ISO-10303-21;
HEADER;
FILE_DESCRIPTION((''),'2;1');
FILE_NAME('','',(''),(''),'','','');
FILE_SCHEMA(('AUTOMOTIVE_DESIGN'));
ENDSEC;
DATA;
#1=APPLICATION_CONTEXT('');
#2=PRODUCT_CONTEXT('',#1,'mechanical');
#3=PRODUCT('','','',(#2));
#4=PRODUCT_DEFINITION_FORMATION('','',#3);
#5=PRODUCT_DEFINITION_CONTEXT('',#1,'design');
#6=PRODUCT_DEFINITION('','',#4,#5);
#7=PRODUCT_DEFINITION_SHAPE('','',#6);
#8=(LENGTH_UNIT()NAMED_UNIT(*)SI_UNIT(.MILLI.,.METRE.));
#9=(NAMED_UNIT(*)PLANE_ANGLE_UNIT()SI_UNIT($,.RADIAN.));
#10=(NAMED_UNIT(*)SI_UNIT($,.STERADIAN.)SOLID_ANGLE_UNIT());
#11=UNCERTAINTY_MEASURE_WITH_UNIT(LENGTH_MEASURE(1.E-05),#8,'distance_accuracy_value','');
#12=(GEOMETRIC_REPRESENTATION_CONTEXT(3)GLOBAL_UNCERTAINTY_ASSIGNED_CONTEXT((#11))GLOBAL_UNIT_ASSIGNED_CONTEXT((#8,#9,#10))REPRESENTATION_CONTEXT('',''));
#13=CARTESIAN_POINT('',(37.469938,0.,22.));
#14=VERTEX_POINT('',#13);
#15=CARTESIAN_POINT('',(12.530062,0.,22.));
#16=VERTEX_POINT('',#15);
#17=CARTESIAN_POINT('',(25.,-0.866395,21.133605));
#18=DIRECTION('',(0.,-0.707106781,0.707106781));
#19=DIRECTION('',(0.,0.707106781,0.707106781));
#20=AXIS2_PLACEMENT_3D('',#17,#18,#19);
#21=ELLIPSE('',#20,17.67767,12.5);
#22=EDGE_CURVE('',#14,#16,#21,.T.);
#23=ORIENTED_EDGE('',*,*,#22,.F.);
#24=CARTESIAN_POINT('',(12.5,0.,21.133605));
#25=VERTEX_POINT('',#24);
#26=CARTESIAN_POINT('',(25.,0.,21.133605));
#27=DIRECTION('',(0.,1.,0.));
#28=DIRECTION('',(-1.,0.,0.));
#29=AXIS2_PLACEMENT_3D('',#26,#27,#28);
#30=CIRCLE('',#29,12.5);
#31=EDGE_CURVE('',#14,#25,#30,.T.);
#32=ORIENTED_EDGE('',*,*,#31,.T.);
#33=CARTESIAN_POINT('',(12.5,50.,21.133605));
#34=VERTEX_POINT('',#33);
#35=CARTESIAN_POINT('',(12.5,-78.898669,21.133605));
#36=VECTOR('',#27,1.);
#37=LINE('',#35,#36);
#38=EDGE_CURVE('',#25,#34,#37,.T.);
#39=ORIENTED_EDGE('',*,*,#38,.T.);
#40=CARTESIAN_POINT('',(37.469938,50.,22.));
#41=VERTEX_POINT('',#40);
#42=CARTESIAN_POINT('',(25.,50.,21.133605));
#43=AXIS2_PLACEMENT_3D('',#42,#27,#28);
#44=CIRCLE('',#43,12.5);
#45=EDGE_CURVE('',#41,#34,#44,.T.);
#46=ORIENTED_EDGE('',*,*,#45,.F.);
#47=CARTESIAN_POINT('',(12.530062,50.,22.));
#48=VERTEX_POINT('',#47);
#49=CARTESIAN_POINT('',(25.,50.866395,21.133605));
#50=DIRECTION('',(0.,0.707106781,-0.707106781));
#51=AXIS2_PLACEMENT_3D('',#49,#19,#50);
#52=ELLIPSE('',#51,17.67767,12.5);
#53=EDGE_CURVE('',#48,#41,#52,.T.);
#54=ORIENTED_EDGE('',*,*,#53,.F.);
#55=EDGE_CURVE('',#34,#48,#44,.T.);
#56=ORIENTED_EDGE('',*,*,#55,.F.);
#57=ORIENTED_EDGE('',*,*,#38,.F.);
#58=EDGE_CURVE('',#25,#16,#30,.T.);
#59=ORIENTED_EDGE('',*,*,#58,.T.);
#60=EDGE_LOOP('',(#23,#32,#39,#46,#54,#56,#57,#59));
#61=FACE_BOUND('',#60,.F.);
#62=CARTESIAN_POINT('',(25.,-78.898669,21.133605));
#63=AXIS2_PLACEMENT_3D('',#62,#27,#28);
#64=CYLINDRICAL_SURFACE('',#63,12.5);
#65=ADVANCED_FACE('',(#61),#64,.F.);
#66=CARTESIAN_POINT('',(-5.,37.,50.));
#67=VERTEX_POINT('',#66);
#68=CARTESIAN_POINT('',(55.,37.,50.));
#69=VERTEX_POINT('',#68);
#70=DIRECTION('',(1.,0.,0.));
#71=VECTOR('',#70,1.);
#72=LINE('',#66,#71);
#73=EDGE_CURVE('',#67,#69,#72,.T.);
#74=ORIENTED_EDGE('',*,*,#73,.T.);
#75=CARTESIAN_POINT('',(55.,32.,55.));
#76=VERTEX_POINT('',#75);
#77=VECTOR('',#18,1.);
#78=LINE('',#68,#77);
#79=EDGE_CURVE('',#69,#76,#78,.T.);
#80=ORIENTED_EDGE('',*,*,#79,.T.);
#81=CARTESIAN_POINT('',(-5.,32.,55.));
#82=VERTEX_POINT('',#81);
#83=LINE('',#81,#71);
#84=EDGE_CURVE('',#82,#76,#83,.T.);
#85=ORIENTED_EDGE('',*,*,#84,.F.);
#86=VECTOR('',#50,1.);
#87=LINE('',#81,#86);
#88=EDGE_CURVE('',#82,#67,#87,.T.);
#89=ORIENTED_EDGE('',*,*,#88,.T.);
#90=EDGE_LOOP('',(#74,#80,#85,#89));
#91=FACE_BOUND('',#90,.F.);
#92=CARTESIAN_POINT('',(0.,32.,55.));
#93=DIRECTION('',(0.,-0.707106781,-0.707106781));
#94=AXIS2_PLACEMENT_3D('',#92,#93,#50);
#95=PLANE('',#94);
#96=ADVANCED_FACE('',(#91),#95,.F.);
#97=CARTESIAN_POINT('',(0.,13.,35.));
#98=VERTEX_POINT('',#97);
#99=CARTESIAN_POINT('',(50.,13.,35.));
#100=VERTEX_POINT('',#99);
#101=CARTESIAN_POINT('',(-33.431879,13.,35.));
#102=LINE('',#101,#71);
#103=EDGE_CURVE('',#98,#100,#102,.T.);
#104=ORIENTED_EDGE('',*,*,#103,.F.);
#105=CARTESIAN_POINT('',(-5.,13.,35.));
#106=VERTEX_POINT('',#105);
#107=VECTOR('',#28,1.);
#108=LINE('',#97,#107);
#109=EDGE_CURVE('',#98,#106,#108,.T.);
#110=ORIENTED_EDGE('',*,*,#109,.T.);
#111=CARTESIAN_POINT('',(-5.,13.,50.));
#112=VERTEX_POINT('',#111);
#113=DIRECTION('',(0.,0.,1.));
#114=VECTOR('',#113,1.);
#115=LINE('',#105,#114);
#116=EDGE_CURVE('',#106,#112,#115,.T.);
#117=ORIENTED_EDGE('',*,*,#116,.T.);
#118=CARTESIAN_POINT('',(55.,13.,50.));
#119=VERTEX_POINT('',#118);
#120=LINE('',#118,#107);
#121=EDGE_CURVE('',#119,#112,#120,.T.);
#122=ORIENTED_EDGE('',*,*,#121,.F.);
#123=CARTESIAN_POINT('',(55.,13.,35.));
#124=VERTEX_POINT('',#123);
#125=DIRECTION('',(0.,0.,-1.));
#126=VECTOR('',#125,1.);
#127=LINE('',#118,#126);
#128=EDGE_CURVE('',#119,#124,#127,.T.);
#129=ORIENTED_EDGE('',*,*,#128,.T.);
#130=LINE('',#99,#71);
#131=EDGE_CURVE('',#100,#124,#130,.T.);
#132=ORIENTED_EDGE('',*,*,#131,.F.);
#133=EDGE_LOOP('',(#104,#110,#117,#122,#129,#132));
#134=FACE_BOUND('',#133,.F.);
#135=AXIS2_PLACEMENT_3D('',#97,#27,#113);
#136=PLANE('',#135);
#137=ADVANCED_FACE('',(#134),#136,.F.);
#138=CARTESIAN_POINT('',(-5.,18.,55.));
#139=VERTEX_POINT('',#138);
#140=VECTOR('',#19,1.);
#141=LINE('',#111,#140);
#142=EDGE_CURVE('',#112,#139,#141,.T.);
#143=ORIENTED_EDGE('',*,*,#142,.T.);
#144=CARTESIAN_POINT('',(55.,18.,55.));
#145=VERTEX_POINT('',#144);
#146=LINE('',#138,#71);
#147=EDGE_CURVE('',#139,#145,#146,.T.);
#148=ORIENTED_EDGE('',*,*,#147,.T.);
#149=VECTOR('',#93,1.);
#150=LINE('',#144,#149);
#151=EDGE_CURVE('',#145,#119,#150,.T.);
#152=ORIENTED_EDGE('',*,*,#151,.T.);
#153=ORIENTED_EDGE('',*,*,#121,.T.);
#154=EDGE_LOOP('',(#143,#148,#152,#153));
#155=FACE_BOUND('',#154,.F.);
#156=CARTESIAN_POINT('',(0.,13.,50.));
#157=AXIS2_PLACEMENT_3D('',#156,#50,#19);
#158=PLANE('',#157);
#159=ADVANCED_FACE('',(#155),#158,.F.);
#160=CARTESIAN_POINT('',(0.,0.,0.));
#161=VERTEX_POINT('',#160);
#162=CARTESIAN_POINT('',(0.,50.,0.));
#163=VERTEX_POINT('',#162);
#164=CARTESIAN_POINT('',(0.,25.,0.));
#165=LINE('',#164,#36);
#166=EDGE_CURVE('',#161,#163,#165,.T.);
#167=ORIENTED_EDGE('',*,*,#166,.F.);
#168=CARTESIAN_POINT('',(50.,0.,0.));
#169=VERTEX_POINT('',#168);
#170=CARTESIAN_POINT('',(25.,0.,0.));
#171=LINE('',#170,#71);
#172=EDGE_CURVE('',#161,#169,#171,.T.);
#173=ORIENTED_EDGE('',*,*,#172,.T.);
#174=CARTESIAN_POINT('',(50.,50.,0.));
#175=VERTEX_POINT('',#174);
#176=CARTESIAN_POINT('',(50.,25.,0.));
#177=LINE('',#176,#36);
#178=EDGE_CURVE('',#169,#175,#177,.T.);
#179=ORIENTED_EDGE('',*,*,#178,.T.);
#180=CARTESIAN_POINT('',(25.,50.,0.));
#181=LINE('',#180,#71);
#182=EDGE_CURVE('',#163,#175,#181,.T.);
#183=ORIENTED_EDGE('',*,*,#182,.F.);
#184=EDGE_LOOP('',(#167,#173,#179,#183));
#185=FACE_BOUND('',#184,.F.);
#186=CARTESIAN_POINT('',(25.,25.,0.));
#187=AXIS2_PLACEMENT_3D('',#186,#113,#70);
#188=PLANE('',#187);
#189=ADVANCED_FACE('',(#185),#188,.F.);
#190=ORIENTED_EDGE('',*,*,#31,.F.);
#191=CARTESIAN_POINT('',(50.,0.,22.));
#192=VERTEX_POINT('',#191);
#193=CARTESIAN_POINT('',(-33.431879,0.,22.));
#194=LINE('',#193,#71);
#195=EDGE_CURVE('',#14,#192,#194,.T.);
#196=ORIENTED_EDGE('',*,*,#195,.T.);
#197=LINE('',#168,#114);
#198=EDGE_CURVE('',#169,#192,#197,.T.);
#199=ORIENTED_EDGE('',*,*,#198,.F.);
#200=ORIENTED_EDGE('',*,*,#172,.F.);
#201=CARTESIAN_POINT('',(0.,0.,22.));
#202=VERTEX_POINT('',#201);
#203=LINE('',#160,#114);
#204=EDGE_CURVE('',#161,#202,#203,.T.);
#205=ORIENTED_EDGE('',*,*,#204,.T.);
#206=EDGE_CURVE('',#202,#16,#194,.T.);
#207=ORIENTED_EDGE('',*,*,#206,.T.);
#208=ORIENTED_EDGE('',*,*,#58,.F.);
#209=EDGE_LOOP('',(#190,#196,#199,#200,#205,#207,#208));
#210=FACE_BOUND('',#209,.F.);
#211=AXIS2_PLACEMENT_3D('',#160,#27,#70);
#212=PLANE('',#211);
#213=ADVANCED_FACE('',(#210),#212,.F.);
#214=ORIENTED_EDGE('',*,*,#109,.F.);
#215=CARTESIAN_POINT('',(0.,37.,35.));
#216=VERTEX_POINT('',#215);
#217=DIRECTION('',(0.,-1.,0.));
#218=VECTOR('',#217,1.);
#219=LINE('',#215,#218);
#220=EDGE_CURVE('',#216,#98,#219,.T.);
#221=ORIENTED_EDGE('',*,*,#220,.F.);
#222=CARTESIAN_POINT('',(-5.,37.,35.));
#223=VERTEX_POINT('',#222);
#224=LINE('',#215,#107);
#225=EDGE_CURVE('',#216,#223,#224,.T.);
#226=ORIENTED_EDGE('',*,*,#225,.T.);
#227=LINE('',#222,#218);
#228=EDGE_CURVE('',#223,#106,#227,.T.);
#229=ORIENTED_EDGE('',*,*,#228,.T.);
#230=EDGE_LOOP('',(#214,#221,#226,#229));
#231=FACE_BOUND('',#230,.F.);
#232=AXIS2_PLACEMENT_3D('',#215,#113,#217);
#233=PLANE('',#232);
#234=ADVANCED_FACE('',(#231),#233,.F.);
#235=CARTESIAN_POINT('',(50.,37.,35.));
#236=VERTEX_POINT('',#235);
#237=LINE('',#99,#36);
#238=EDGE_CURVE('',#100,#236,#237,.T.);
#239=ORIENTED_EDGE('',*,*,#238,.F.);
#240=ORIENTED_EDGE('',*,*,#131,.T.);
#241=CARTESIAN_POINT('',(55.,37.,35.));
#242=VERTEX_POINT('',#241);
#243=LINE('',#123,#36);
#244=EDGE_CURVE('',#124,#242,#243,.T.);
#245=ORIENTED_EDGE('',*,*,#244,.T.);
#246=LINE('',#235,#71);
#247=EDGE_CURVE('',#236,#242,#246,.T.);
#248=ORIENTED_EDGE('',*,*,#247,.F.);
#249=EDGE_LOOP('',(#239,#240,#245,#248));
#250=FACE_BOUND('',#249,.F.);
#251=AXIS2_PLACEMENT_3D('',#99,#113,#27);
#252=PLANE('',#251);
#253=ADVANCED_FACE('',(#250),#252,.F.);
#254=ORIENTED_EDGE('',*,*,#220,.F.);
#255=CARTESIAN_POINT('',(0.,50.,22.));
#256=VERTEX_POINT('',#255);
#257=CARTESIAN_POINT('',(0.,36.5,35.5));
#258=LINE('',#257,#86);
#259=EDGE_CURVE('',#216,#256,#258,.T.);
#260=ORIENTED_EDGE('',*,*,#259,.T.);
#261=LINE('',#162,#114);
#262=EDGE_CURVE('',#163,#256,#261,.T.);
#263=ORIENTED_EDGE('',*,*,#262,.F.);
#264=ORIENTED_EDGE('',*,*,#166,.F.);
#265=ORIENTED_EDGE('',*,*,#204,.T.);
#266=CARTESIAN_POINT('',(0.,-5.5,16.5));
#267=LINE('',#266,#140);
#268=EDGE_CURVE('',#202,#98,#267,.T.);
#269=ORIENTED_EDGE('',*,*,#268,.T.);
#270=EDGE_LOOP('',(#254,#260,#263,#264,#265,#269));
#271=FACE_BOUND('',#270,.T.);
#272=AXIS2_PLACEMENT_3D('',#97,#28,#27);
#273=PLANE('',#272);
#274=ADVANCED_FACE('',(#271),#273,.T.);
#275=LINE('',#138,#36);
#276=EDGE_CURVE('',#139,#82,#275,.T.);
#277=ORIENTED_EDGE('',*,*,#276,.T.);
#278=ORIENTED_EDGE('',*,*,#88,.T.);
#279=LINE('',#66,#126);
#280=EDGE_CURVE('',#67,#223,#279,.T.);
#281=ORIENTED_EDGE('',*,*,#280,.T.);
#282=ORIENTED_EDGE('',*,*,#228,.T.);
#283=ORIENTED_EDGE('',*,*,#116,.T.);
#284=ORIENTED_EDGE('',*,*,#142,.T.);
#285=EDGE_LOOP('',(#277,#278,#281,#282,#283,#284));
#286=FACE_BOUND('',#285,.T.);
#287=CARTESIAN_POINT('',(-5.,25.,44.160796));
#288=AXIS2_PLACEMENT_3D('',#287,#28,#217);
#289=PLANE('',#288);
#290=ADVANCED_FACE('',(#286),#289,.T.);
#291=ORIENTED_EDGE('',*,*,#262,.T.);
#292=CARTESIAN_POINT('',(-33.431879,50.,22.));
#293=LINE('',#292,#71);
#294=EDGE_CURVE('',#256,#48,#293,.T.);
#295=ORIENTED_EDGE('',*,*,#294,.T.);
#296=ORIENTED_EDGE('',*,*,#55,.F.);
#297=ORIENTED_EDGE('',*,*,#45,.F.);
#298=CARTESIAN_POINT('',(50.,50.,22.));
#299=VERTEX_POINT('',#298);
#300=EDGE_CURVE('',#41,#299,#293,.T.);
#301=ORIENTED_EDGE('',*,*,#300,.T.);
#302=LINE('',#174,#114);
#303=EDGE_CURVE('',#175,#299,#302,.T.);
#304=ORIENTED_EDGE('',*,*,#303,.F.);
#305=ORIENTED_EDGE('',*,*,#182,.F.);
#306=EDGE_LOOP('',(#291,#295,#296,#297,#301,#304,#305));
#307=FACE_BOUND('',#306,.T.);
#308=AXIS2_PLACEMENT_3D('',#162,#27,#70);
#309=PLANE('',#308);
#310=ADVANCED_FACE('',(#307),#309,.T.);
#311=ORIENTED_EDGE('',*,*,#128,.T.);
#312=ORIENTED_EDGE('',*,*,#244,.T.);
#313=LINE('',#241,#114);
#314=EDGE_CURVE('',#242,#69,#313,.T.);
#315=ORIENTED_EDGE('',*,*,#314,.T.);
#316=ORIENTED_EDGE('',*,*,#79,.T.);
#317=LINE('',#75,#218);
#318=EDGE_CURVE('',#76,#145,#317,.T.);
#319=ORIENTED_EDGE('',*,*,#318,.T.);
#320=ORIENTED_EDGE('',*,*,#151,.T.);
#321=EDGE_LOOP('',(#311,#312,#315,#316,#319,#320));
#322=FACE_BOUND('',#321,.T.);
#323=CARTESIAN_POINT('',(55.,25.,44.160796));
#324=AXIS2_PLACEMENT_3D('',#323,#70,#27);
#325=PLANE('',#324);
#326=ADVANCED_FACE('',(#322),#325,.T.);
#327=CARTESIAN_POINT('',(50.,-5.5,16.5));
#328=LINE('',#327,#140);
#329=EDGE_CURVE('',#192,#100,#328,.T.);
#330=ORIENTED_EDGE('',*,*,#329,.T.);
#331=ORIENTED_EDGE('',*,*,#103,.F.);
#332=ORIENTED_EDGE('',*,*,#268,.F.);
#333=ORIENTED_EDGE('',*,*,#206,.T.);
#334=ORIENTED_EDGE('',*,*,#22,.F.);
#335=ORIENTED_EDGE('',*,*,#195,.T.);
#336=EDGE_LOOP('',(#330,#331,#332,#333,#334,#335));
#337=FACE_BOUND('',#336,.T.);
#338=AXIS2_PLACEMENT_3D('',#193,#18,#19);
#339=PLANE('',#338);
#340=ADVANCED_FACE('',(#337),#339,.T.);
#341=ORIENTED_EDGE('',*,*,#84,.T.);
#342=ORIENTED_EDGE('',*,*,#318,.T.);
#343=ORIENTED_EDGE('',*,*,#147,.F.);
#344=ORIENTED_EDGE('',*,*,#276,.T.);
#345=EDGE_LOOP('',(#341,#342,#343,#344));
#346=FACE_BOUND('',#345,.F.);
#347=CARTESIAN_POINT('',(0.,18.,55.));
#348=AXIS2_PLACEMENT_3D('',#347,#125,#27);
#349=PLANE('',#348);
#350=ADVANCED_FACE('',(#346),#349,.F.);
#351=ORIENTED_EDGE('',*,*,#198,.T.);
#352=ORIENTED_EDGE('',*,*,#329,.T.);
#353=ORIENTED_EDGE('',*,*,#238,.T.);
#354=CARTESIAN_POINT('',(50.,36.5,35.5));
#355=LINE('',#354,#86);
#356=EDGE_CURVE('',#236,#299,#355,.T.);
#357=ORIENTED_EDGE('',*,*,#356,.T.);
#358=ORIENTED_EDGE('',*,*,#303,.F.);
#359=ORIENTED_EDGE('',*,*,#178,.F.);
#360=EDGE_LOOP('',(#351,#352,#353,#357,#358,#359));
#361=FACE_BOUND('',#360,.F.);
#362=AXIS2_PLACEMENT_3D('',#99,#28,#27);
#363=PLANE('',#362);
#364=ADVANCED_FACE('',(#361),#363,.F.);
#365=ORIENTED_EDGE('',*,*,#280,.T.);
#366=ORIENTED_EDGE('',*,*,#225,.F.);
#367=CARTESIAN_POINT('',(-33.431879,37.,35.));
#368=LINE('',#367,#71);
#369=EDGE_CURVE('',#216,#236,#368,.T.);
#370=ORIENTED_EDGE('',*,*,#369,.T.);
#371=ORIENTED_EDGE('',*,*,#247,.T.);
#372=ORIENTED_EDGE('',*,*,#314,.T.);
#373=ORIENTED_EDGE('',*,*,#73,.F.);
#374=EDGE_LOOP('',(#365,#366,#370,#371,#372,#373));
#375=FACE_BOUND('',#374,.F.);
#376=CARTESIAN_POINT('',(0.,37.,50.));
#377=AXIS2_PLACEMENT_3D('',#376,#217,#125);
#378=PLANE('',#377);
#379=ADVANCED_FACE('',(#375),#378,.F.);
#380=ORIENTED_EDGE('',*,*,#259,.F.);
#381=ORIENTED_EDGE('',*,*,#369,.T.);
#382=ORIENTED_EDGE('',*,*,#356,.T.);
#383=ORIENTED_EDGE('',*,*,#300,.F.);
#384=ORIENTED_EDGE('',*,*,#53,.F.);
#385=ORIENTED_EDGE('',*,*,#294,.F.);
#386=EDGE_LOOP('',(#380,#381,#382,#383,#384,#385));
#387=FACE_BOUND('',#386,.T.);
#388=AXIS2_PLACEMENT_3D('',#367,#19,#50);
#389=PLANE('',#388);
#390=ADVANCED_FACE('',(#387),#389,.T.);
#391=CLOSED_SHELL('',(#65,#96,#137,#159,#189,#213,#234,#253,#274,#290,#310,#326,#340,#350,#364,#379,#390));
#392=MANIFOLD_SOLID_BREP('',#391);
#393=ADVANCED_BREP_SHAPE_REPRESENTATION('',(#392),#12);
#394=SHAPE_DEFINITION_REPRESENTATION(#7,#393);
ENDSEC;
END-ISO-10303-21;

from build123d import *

# Parameters (mm, degrees)
F0_W        = 50
F0_H        = 50
F1_DEPTH    = 35
F3_D        = 25
F4_T1_DEPTH = 116.8637576871
F5_T1_DEPTH = 116.8637576871
F6_DEPTH    = 20
F7_T1_DEPTH = 75.7168298797
F10_DEPTH   = 5
F12_DEPTH   = 5


# Not quite as in the source:
# - a fillet or chamfer that OpenCascade refuses, or shapes differently, is made with other operations: its cross-section is extruded or revolved along the edge and cut away or added
# - two fillets or chamfers of one size are made in one step


with BuildPart() as f1:
    # F0 (on Top) → F1 (new body)
    with BuildSketch(Plane.XY):
        with Locations((25, 25)):
            Rectangle(F0_W, F0_H)
    extrude(amount=F1_DEPTH)

    # F3 (through all)
    with Locations(Plane.XZ):
        with Locations((25, 21.1336053908)):
            Hole(F3_D / 2)

    # F4: chamfer of 13 on 1 edges, made by hand

    # F4_s2 → F4_t1 (cut)
    with BuildSketch(Plane.YZ.offset(-33.4318788436)):
        Polygon((0, 22), (13, 35), (0, 35), align=None)
    extrude(amount=F4_T1_DEPTH, mode=Mode.SUBTRACT)

    # F5: chamfer of 13 on 1 edges, made by hand

    # F5_s2 → F5_t1 (cut)
    with BuildSketch(Plane.YZ.offset(-33.4318788436)):
        Polygon((37, 35), (50, 22), (50, 35), align=None)
    extrude(amount=F5_T1_DEPTH, mode=Mode.SUBTRACT)

    # F6 (add): a face of the model
    f6_faces = [f1.faces().sort_by_distance(p)[0] for p in [
        (25, 25, 35),
    ]]
    extrude(f6_faces, amount=F6_DEPTH)

    # F7: chamfer of 5 on 4 edges, made by hand

    # F7_s2 → F7_t1 (cut)
    with BuildSketch(Plane.YZ.offset(-12.8584149398)):
        Polygon((13, 50), (18, 55), (13, 55), align=None)
        Polygon((37, 50), (32, 55), (37, 55), align=None)
    extrude(amount=F7_T1_DEPTH, mode=Mode.SUBTRACT)

    # F9 (on face) → F10 (join)
    with BuildSketch(Plane.YZ.offset(50)):
        Polygon((13, 50), (13, 35), (37, 35), (37, 50), (32, 55), (18, 55), align=None)
    extrude(amount=F10_DEPTH)

    # F11 (on face) → F12 (join)
    with BuildSketch(Plane(origin=(0, 0, 0), x_dir=(0, -1, 0), z_dir=(-1, 0, 0))):
        Polygon((-37, 50), (-37, 35), (-13, 35), (-13, 50), (-18, 55), (-32, 55), align=None)
    extrude(amount=F12_DEPTH)


solid = f1.part
